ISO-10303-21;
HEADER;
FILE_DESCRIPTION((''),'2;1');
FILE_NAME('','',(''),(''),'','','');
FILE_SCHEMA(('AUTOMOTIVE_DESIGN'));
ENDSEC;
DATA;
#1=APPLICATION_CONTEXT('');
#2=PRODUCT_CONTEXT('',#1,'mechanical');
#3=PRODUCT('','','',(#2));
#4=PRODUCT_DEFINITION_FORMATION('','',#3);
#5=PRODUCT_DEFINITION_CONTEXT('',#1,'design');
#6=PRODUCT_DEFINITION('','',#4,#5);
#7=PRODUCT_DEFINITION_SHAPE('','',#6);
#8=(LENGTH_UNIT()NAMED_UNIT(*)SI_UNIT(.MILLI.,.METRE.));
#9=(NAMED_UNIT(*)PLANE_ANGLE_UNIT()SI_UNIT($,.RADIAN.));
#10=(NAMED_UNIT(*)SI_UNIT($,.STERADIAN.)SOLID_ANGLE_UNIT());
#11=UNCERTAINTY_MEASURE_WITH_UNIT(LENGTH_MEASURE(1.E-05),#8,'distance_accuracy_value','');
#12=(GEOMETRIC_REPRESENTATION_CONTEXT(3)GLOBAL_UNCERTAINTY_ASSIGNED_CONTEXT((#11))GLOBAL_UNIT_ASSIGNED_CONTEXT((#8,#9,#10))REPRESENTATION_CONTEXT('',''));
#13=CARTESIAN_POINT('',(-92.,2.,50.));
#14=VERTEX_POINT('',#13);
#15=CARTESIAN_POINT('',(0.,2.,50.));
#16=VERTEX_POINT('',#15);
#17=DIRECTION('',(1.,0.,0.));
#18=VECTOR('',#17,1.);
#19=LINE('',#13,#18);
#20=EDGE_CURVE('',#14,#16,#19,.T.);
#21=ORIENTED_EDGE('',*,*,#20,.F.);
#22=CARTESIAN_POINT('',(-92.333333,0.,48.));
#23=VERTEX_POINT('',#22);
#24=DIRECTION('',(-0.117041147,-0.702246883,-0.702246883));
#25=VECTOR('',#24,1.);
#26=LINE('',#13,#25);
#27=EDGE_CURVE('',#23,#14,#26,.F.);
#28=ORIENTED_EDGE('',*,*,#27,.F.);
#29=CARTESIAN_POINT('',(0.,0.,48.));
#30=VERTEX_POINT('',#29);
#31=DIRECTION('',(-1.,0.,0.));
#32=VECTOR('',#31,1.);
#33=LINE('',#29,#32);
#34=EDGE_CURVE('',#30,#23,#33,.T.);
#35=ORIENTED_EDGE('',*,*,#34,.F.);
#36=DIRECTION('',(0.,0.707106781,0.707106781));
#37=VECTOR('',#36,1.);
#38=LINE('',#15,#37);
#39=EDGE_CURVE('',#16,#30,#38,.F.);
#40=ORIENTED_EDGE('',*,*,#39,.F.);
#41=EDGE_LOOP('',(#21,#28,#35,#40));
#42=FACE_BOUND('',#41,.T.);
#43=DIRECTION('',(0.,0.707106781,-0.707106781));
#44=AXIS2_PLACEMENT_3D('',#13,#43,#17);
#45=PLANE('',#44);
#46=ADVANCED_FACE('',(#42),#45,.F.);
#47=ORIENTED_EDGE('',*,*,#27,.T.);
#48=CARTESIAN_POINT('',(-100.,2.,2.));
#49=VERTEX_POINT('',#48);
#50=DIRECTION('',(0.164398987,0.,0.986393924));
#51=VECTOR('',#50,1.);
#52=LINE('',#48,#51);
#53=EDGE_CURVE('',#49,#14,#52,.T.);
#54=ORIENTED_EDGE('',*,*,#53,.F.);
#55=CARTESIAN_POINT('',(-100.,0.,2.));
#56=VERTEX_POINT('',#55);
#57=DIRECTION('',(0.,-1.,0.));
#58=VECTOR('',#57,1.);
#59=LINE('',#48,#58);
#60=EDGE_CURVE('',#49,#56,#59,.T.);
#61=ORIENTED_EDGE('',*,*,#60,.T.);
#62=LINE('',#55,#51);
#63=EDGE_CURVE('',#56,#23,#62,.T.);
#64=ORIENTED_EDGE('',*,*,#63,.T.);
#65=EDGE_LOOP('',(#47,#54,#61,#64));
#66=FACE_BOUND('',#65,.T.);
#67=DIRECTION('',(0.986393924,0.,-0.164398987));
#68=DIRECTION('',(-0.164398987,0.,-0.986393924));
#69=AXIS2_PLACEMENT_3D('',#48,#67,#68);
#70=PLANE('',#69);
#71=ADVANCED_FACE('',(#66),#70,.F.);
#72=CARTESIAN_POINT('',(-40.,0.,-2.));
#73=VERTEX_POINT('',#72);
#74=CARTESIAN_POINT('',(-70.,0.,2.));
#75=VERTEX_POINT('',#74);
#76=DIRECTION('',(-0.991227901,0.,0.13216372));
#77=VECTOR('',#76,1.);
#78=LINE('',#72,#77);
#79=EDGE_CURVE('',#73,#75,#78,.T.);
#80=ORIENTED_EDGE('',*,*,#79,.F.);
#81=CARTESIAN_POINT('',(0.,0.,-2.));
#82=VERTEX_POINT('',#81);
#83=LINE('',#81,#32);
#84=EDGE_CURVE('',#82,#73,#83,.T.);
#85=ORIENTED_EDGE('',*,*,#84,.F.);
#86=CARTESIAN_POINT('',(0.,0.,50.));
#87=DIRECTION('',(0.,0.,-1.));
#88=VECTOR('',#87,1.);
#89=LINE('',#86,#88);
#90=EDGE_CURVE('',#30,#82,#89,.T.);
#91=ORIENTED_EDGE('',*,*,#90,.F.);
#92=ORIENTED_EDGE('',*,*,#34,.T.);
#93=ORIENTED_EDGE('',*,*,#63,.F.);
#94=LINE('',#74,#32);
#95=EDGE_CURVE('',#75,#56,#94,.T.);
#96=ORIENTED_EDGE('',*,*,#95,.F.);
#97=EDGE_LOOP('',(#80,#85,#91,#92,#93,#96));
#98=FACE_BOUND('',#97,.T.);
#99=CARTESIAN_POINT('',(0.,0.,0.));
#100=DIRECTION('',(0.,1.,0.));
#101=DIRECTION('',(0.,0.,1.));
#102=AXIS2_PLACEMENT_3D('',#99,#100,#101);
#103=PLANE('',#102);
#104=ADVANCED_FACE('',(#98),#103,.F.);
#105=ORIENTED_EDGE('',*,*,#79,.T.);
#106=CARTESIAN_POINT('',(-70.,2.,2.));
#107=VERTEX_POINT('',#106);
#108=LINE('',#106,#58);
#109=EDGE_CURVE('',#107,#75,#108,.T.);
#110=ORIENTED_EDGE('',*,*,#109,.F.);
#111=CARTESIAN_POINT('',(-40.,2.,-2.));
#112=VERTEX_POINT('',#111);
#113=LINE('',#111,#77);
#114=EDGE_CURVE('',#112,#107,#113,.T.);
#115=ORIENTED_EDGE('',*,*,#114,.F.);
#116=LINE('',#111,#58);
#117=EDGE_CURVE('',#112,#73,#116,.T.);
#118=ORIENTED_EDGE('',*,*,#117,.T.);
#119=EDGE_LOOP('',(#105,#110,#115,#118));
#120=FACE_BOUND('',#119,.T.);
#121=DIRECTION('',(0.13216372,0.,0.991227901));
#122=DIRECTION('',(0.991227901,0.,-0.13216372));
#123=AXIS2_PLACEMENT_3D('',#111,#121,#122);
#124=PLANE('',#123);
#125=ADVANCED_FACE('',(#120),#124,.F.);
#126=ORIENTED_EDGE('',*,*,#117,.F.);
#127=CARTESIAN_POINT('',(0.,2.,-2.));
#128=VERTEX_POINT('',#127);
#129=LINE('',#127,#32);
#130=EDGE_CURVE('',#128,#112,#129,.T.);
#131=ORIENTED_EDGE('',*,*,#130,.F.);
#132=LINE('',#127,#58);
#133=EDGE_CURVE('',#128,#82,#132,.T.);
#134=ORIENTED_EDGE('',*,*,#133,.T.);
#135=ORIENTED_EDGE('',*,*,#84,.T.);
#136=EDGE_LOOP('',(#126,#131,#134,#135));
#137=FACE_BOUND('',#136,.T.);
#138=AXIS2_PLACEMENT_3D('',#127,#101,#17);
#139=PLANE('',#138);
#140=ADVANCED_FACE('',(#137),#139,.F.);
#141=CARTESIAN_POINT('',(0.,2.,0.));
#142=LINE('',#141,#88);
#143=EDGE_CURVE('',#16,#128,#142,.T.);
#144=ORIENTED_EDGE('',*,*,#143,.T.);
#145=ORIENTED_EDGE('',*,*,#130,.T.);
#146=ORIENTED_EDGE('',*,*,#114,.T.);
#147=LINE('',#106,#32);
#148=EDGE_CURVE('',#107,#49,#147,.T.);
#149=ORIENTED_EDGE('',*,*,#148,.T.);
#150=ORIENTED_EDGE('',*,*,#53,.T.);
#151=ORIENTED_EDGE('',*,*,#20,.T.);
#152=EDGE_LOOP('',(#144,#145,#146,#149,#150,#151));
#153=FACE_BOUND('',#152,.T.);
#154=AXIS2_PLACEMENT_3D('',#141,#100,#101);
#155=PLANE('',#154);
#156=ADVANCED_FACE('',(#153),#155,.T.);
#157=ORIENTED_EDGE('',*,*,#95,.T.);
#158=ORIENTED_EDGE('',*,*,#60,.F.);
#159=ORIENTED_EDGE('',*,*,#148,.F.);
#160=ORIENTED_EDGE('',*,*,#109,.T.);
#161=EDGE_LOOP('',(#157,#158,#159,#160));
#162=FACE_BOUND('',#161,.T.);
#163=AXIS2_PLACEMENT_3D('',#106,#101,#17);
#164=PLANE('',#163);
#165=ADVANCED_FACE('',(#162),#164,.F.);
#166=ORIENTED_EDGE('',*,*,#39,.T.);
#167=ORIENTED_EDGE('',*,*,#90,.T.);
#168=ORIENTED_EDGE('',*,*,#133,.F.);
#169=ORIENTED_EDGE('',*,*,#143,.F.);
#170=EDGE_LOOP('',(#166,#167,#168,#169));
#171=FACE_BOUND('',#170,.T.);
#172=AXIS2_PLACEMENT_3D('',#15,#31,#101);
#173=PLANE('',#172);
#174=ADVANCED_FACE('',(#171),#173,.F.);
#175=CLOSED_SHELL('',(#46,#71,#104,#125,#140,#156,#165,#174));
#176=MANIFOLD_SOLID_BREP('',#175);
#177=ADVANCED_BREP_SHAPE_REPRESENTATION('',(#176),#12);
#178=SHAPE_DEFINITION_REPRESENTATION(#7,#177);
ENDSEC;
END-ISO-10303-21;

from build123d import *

# Parameters (mm, degrees)
BOSS_EXTRUDE1_DEPTH = 2
CHAMFER1_SIZE       = 2


with BuildPart() as part:
    # Sketch1 → Boss-Extrude1 (new body)
    with BuildSketch(Plane(origin=(0, 0, 0), x_dir=(1, 0, 0), z_dir=(0, 1, 0))):
        Polygon((0, -50), (0, 0), (0, 2), (-40, 2), (-70, -2), (-100, -2), (-92, -50), align=None)
    extrude(amount=BOSS_EXTRUDE1_DEPTH)

    # Chamfer1
    chamfer1_edges = [part.edges().sort_by_distance(p)[0] for p in [
        (-46, 0, 50),
    ]]
    chamfer(chamfer1_edges, length=CHAMFER1_SIZE - 0.0001)  # a hair under: the kernel refuses the full size


solid = part.part
